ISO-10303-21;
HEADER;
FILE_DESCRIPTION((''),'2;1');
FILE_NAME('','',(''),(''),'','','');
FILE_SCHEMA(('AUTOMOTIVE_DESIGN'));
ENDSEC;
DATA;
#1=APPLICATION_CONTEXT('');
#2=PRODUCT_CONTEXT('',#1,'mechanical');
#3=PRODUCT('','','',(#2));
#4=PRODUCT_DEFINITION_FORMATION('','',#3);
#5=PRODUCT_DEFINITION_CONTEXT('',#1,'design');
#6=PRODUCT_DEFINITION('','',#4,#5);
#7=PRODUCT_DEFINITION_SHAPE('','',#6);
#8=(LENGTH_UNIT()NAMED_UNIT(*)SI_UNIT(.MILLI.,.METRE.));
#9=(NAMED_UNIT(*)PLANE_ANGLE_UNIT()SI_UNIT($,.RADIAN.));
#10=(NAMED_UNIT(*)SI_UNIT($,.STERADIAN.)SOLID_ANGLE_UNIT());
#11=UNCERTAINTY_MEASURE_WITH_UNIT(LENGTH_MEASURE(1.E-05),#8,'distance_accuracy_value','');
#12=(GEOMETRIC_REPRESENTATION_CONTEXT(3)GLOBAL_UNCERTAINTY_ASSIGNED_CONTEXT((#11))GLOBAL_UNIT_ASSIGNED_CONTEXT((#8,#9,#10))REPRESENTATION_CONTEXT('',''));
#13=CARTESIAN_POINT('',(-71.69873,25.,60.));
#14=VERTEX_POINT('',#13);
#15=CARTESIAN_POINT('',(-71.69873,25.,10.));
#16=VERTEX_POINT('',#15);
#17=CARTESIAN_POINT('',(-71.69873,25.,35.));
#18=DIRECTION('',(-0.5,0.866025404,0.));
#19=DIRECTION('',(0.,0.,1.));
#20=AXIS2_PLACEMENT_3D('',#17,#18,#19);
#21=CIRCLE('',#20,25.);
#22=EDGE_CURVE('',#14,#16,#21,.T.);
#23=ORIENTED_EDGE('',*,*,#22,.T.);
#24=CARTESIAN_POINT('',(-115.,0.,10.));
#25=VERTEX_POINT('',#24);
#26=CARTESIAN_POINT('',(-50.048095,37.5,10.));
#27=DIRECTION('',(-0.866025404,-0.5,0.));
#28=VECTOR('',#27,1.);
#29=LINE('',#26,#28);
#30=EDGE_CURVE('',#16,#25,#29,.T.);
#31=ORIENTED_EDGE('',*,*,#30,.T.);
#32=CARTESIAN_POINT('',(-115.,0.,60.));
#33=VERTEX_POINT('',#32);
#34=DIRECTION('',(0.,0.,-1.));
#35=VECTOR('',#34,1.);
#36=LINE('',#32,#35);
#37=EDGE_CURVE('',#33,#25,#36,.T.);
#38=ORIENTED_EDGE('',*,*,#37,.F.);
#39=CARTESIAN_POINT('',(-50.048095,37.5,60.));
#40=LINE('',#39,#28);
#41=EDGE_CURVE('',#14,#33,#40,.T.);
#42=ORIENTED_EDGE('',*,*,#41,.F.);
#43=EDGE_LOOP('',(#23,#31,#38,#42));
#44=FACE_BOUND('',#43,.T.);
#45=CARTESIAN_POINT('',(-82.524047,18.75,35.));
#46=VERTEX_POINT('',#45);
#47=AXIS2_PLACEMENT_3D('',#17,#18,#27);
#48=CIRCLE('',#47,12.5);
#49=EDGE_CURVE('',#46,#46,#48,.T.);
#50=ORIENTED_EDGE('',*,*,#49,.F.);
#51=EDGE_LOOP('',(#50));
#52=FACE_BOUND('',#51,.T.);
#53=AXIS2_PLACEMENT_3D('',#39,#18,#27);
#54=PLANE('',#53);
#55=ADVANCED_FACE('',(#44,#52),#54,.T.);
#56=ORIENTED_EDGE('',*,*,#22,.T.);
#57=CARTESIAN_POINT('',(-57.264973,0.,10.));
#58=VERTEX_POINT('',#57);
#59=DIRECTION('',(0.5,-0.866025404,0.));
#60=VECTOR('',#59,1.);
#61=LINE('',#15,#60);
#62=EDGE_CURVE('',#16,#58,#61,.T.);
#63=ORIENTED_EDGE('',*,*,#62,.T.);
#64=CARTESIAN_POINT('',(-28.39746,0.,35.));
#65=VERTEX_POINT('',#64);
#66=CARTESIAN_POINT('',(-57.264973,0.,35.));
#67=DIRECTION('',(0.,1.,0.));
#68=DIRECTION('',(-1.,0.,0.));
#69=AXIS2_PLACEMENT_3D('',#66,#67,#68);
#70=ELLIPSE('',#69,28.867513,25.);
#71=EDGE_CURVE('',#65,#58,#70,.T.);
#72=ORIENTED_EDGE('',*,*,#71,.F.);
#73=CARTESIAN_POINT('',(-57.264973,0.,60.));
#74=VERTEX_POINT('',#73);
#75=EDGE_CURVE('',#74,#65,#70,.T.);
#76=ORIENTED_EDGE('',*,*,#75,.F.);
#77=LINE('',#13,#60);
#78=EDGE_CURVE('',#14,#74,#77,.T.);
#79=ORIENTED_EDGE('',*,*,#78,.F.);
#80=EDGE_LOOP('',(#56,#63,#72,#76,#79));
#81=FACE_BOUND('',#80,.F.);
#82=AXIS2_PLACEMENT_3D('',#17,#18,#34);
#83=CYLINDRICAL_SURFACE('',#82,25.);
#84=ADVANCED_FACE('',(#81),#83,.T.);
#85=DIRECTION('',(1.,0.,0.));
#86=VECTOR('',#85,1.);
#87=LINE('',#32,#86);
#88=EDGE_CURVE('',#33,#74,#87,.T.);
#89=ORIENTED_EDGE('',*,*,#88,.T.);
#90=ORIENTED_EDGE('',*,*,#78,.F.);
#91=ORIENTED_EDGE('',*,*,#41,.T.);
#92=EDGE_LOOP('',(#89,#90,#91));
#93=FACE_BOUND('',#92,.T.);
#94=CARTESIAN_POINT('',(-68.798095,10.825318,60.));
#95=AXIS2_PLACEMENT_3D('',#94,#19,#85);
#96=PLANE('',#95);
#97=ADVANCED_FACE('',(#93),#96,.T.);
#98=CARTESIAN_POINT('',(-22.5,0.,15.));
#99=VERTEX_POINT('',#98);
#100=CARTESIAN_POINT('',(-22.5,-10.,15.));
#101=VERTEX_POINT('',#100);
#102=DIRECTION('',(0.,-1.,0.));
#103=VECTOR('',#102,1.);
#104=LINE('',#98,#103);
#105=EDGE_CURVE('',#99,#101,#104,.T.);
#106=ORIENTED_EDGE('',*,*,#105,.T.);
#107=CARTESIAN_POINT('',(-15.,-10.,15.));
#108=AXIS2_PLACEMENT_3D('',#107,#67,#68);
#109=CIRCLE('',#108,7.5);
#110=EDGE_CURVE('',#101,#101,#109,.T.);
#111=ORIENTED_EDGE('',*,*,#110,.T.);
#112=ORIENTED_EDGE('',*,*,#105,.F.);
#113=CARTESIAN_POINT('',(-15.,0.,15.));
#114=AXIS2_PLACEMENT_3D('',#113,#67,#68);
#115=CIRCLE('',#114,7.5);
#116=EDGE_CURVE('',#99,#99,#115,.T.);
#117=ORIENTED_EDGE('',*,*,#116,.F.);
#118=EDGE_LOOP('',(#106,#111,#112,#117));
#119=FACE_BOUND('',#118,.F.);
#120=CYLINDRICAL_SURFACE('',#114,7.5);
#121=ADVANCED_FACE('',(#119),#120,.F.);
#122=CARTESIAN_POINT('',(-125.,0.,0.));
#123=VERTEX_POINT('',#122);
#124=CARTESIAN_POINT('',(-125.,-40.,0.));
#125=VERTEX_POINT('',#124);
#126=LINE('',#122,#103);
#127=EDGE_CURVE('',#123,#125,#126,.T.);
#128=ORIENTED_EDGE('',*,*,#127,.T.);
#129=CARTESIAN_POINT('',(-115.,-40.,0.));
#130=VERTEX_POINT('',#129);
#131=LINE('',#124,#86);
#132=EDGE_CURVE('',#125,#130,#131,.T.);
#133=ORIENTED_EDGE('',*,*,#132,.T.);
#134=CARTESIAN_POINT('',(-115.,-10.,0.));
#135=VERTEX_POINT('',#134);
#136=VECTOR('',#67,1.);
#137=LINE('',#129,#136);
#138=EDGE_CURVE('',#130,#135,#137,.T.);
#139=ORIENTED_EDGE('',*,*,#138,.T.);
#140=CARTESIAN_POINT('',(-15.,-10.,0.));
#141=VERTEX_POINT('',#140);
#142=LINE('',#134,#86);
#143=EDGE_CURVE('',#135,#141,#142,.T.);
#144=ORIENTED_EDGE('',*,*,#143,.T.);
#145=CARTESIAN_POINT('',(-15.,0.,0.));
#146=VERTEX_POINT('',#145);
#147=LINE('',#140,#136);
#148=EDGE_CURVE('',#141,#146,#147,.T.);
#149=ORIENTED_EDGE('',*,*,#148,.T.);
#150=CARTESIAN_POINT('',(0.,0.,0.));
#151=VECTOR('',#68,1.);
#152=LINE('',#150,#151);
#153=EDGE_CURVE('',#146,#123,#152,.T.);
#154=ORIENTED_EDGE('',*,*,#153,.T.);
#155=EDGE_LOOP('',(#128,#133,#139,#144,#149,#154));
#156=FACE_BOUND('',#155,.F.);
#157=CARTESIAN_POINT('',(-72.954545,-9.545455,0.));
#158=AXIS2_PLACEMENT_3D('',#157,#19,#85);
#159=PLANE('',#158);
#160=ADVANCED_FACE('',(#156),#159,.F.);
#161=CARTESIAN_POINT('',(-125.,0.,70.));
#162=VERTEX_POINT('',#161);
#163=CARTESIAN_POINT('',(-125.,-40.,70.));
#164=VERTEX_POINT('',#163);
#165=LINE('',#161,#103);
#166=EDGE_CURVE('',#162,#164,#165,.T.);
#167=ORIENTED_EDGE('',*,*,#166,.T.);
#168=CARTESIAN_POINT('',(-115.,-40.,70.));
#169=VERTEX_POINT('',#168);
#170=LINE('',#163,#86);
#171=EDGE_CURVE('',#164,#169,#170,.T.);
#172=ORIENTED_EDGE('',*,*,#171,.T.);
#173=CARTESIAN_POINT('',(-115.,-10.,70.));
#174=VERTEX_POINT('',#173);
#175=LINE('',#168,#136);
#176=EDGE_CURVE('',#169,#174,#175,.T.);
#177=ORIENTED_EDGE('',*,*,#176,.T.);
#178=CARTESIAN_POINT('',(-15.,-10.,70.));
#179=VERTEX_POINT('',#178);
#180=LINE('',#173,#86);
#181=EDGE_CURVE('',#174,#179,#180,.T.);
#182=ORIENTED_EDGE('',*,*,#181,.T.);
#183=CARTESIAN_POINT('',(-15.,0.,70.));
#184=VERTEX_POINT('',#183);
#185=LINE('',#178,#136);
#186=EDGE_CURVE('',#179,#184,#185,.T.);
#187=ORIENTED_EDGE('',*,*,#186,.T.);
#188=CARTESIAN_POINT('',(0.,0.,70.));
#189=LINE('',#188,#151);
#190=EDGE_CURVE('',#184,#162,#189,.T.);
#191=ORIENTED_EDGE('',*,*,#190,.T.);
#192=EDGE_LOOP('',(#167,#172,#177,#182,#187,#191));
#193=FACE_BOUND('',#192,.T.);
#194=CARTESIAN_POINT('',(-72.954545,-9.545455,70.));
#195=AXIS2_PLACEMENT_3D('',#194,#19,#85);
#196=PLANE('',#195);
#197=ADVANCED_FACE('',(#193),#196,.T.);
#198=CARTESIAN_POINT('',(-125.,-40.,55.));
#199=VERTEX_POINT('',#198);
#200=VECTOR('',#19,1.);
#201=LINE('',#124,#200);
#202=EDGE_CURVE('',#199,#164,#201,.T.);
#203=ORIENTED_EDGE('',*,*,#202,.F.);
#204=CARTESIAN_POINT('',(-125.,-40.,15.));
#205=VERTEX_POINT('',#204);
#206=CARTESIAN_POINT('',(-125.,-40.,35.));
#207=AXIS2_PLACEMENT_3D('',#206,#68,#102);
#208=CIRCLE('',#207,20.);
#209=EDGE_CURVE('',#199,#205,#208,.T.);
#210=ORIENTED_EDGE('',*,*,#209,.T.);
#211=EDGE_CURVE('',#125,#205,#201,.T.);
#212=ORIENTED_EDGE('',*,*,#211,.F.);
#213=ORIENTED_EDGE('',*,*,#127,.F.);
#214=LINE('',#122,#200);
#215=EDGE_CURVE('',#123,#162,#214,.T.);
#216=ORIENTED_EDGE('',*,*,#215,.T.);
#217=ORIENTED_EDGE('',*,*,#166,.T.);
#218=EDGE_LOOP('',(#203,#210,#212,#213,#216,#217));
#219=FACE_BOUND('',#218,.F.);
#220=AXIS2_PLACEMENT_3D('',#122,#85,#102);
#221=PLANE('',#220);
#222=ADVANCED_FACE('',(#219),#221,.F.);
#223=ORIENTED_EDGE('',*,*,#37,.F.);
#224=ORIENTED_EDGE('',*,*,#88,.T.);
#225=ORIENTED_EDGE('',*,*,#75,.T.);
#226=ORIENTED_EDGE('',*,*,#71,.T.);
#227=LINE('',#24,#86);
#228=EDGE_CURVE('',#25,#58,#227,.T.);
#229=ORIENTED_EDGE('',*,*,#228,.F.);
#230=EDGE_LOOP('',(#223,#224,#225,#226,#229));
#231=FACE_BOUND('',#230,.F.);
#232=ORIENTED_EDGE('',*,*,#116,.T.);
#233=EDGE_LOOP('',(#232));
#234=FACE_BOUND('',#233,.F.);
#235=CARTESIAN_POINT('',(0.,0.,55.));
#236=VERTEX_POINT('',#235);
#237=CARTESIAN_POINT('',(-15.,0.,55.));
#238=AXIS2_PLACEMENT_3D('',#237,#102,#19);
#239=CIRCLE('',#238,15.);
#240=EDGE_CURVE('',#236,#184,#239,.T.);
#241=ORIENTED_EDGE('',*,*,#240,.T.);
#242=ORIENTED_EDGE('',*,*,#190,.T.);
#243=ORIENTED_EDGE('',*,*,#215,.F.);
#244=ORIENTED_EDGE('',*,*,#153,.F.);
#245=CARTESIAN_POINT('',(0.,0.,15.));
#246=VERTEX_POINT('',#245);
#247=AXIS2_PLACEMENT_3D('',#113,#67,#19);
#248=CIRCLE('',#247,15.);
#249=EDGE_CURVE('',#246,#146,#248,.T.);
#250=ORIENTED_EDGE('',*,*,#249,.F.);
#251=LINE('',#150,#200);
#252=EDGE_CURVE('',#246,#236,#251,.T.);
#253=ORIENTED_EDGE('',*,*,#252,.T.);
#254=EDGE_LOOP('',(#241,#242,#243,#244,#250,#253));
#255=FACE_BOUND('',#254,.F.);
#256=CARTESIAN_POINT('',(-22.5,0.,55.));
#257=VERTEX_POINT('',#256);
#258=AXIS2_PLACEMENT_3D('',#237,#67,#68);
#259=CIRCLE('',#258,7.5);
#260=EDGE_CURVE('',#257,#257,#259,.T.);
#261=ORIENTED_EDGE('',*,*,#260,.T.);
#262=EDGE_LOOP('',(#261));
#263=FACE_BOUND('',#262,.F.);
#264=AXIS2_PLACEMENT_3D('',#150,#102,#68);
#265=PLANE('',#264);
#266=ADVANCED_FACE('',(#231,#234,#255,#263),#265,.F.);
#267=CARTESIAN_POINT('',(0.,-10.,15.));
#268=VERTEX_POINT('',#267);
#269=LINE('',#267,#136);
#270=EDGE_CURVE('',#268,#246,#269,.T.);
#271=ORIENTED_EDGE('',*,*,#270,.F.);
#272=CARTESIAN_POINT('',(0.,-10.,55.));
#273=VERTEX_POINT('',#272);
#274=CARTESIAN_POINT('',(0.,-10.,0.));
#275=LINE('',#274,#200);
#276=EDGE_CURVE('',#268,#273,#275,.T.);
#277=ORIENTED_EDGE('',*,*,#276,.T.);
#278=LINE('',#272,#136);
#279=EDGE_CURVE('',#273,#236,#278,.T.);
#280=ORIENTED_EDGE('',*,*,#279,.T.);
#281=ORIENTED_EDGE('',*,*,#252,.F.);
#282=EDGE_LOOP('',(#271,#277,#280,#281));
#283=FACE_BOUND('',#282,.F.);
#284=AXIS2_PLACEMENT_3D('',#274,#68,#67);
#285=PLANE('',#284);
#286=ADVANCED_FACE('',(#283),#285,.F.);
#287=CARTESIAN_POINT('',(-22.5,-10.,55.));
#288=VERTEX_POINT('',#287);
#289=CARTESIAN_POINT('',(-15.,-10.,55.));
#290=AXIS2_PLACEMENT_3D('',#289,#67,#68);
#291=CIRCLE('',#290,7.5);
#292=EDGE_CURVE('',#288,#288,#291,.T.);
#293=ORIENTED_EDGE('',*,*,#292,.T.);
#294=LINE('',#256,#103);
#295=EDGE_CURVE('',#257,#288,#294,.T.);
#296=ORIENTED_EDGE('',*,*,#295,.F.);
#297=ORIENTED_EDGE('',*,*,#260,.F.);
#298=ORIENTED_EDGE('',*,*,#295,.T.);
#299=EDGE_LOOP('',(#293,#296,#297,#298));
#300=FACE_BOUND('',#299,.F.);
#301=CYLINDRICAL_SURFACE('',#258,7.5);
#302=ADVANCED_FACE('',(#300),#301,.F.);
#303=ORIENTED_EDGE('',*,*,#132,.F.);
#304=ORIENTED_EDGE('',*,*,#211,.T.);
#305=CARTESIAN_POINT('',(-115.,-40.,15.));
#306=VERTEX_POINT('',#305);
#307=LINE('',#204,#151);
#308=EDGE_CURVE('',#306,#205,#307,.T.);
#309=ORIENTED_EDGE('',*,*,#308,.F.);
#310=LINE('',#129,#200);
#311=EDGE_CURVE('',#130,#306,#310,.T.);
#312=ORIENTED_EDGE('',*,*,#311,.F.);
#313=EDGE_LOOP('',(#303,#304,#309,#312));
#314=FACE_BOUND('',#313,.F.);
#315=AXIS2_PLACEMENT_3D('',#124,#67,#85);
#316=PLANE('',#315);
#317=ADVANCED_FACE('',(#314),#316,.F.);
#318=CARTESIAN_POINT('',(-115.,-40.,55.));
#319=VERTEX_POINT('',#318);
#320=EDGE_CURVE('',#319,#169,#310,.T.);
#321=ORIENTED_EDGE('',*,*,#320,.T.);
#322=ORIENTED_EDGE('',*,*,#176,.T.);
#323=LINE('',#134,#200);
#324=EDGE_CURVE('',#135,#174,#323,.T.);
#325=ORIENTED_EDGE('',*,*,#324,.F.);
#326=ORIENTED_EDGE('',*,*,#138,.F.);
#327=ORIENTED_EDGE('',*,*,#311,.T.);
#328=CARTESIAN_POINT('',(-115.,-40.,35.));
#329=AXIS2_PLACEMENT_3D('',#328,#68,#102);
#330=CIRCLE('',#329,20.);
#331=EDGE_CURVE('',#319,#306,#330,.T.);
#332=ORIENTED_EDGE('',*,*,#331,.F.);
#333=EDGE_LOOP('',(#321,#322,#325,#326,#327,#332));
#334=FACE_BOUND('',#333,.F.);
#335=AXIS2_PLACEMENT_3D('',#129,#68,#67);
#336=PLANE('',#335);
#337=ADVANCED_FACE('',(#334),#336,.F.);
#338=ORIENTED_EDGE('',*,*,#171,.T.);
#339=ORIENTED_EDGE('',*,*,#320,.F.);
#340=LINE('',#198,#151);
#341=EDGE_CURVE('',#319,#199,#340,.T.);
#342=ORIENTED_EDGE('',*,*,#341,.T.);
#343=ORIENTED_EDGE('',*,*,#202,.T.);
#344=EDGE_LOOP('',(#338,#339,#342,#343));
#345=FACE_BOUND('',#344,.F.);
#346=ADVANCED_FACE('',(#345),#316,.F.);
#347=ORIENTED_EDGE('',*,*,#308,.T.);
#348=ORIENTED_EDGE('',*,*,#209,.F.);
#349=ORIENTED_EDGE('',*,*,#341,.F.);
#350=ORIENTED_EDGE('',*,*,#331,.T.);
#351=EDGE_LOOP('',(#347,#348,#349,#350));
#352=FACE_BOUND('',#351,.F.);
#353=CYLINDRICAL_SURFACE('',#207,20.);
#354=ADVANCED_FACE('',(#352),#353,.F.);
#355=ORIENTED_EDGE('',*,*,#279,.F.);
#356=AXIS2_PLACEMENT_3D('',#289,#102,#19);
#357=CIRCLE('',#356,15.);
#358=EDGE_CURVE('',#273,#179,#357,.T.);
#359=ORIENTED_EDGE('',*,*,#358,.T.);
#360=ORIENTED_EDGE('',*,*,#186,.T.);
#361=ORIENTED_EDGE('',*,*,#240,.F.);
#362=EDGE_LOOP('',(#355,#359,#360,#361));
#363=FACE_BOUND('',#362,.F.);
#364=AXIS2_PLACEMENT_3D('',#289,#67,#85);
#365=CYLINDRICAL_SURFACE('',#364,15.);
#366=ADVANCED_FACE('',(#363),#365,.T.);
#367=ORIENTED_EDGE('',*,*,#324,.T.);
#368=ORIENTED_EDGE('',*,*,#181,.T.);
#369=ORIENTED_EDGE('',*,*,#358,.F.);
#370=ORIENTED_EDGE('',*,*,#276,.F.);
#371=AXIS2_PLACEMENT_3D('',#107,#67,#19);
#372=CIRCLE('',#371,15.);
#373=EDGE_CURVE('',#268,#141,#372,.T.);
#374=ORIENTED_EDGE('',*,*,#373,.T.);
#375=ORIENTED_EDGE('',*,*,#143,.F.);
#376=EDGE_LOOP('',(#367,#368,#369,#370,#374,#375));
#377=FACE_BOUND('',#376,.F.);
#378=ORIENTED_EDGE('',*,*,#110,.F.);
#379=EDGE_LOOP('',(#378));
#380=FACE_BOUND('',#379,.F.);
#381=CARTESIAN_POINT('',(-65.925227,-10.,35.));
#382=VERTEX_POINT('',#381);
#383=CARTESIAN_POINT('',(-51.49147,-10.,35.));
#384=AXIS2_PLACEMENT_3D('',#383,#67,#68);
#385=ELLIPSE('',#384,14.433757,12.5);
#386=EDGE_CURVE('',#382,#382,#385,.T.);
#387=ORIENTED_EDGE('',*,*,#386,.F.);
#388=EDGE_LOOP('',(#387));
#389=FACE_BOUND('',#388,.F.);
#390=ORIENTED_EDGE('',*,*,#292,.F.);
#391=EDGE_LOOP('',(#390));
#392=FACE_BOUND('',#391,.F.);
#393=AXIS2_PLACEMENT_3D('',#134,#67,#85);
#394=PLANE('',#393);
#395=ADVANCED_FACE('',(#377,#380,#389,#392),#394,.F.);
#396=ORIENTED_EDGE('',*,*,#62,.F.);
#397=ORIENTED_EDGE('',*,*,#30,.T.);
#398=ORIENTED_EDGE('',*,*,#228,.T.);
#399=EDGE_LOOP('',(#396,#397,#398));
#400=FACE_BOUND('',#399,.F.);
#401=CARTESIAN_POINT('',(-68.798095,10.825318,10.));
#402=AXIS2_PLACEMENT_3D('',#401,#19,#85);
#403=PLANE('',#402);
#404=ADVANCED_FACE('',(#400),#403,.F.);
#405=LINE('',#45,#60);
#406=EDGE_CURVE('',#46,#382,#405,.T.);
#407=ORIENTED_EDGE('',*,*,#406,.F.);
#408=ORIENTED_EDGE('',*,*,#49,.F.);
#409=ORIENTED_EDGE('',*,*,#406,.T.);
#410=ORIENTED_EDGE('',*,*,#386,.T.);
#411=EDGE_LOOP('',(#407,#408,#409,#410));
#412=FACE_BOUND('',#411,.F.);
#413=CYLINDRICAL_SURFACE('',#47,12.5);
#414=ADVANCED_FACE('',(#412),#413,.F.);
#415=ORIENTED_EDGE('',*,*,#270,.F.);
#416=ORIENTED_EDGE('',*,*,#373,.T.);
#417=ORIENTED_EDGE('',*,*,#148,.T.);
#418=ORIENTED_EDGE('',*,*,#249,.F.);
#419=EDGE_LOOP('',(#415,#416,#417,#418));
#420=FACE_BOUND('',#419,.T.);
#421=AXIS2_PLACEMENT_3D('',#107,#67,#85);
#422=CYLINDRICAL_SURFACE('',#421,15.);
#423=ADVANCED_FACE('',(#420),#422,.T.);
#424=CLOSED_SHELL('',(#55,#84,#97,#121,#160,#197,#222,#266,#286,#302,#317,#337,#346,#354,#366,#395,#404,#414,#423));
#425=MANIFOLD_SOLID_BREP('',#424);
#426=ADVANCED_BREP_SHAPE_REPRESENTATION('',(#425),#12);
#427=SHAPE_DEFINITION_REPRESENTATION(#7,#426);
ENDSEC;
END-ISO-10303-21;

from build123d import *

# Parameters (mm, degrees)
F1_DEPTH  = 70
F4_DEPTH  = 50
F6_REACH  = 161.8626818177
F7_R      = 12.5
F8_DEPTH  = 92.1420161514
F9_R      = 15
F10_R     = 7.5
F11_DEPTH = 25
F12_R     = 20
F13_DEPTH = 25


with BuildPart() as f1:
    # F0 (on Top) → F1 (new body)
    with BuildSketch(Plane.XY):
        Polygon((0, -10), (0, 0), (-125, 0), (-125, -40), (-115, -40), (-115, -10), align=None)
    extrude(amount=F1_DEPTH)

    # F3 (on offset) → F4 (join)
    with BuildSketch(Plane.XY.offset(60)):
        Polygon((-115, 0), (-28.3974596216, 0), (-50.0480947162, 37.5), align=None)
    extrude(amount=-F4_DEPTH)

    f6_end = Plane(origin=(-53.4880513164, 0, 35), x_dir=(0, 0, 1), z_dir=(0, 1, 0))
    # F5 (on face) → F6 (cut, up to a plane its end follows)
    with BuildSketch(Plane(origin=(-28.75, 49.7964607176, 0), x_dir=(-0.8660254038, -0.5, 0), z_dir=(-0.5, 0.8660254038, 0))):
        with BuildLine():
            ThreePointArc((49.5929214352, 10), (24.5929214352, 35), (49.5929214352, 60))
            Line((49.5929214352, 60), (49.5929214352, 65.1633962989))
            Line((49.5929214352, 65.1633962989), (18.7135729939, 65.1633962989))
            Line((18.7135729939, 65.1633962989), (18.7135729939, 2.6539005339))
            Line((18.7135729939, 2.6539005339), (49.5929214352, 2.6539005339))
            Line((49.5929214352, 2.6539005339), (49.5929214352, 10))
        make_face()
    f6_long = extrude(amount=-F6_REACH, mode=Mode.PRIVATE)
    add(split(f6_long, bisect_by=f6_end, keep=Keep.TOP, mode=Mode.PRIVATE), mode=Mode.SUBTRACT)

    # F7 (on face) → F8 (cut, through all)
    with BuildSketch(Plane(origin=(-28.75, 49.7964607176, 0), x_dir=(-0.8660254038, -0.5, 0), z_dir=(-0.5, 0.8660254038, 0))):
        with Locations((49.5929214352, 35)):
            Circle(F7_R)
    extrude(amount=-F8_DEPTH, mode=Mode.SUBTRACT)

    # F9
    f9_edges = [f1.edges().sort_by_distance(p)[0] for p in [
        (0, -5, 70),
        (0, -5, 0),
    ]]
    fillet(f9_edges, radius=F9_R)

    # F10 (on face) → F11 (cut)
    with BuildSketch(Plane(origin=(0, 0, 0), x_dir=(-1, 0, 0), z_dir=(0, 1, 0))):
        with Locations((15, 15)):
            Circle(F10_R)
        with Locations((15, 55)):
            Circle(F10_R)
    extrude(amount=-F11_DEPTH, mode=Mode.SUBTRACT)

    # F12 (on face) → F13 (cut)
    with BuildSketch(Plane(origin=(-125, 0, 0), x_dir=(0, -1, 0), z_dir=(-1, 0, 0))):
        with Locations((40, 35)):
            Circle(F12_R)
    extrude(amount=-F13_DEPTH, mode=Mode.SUBTRACT)


solid = f1.part
